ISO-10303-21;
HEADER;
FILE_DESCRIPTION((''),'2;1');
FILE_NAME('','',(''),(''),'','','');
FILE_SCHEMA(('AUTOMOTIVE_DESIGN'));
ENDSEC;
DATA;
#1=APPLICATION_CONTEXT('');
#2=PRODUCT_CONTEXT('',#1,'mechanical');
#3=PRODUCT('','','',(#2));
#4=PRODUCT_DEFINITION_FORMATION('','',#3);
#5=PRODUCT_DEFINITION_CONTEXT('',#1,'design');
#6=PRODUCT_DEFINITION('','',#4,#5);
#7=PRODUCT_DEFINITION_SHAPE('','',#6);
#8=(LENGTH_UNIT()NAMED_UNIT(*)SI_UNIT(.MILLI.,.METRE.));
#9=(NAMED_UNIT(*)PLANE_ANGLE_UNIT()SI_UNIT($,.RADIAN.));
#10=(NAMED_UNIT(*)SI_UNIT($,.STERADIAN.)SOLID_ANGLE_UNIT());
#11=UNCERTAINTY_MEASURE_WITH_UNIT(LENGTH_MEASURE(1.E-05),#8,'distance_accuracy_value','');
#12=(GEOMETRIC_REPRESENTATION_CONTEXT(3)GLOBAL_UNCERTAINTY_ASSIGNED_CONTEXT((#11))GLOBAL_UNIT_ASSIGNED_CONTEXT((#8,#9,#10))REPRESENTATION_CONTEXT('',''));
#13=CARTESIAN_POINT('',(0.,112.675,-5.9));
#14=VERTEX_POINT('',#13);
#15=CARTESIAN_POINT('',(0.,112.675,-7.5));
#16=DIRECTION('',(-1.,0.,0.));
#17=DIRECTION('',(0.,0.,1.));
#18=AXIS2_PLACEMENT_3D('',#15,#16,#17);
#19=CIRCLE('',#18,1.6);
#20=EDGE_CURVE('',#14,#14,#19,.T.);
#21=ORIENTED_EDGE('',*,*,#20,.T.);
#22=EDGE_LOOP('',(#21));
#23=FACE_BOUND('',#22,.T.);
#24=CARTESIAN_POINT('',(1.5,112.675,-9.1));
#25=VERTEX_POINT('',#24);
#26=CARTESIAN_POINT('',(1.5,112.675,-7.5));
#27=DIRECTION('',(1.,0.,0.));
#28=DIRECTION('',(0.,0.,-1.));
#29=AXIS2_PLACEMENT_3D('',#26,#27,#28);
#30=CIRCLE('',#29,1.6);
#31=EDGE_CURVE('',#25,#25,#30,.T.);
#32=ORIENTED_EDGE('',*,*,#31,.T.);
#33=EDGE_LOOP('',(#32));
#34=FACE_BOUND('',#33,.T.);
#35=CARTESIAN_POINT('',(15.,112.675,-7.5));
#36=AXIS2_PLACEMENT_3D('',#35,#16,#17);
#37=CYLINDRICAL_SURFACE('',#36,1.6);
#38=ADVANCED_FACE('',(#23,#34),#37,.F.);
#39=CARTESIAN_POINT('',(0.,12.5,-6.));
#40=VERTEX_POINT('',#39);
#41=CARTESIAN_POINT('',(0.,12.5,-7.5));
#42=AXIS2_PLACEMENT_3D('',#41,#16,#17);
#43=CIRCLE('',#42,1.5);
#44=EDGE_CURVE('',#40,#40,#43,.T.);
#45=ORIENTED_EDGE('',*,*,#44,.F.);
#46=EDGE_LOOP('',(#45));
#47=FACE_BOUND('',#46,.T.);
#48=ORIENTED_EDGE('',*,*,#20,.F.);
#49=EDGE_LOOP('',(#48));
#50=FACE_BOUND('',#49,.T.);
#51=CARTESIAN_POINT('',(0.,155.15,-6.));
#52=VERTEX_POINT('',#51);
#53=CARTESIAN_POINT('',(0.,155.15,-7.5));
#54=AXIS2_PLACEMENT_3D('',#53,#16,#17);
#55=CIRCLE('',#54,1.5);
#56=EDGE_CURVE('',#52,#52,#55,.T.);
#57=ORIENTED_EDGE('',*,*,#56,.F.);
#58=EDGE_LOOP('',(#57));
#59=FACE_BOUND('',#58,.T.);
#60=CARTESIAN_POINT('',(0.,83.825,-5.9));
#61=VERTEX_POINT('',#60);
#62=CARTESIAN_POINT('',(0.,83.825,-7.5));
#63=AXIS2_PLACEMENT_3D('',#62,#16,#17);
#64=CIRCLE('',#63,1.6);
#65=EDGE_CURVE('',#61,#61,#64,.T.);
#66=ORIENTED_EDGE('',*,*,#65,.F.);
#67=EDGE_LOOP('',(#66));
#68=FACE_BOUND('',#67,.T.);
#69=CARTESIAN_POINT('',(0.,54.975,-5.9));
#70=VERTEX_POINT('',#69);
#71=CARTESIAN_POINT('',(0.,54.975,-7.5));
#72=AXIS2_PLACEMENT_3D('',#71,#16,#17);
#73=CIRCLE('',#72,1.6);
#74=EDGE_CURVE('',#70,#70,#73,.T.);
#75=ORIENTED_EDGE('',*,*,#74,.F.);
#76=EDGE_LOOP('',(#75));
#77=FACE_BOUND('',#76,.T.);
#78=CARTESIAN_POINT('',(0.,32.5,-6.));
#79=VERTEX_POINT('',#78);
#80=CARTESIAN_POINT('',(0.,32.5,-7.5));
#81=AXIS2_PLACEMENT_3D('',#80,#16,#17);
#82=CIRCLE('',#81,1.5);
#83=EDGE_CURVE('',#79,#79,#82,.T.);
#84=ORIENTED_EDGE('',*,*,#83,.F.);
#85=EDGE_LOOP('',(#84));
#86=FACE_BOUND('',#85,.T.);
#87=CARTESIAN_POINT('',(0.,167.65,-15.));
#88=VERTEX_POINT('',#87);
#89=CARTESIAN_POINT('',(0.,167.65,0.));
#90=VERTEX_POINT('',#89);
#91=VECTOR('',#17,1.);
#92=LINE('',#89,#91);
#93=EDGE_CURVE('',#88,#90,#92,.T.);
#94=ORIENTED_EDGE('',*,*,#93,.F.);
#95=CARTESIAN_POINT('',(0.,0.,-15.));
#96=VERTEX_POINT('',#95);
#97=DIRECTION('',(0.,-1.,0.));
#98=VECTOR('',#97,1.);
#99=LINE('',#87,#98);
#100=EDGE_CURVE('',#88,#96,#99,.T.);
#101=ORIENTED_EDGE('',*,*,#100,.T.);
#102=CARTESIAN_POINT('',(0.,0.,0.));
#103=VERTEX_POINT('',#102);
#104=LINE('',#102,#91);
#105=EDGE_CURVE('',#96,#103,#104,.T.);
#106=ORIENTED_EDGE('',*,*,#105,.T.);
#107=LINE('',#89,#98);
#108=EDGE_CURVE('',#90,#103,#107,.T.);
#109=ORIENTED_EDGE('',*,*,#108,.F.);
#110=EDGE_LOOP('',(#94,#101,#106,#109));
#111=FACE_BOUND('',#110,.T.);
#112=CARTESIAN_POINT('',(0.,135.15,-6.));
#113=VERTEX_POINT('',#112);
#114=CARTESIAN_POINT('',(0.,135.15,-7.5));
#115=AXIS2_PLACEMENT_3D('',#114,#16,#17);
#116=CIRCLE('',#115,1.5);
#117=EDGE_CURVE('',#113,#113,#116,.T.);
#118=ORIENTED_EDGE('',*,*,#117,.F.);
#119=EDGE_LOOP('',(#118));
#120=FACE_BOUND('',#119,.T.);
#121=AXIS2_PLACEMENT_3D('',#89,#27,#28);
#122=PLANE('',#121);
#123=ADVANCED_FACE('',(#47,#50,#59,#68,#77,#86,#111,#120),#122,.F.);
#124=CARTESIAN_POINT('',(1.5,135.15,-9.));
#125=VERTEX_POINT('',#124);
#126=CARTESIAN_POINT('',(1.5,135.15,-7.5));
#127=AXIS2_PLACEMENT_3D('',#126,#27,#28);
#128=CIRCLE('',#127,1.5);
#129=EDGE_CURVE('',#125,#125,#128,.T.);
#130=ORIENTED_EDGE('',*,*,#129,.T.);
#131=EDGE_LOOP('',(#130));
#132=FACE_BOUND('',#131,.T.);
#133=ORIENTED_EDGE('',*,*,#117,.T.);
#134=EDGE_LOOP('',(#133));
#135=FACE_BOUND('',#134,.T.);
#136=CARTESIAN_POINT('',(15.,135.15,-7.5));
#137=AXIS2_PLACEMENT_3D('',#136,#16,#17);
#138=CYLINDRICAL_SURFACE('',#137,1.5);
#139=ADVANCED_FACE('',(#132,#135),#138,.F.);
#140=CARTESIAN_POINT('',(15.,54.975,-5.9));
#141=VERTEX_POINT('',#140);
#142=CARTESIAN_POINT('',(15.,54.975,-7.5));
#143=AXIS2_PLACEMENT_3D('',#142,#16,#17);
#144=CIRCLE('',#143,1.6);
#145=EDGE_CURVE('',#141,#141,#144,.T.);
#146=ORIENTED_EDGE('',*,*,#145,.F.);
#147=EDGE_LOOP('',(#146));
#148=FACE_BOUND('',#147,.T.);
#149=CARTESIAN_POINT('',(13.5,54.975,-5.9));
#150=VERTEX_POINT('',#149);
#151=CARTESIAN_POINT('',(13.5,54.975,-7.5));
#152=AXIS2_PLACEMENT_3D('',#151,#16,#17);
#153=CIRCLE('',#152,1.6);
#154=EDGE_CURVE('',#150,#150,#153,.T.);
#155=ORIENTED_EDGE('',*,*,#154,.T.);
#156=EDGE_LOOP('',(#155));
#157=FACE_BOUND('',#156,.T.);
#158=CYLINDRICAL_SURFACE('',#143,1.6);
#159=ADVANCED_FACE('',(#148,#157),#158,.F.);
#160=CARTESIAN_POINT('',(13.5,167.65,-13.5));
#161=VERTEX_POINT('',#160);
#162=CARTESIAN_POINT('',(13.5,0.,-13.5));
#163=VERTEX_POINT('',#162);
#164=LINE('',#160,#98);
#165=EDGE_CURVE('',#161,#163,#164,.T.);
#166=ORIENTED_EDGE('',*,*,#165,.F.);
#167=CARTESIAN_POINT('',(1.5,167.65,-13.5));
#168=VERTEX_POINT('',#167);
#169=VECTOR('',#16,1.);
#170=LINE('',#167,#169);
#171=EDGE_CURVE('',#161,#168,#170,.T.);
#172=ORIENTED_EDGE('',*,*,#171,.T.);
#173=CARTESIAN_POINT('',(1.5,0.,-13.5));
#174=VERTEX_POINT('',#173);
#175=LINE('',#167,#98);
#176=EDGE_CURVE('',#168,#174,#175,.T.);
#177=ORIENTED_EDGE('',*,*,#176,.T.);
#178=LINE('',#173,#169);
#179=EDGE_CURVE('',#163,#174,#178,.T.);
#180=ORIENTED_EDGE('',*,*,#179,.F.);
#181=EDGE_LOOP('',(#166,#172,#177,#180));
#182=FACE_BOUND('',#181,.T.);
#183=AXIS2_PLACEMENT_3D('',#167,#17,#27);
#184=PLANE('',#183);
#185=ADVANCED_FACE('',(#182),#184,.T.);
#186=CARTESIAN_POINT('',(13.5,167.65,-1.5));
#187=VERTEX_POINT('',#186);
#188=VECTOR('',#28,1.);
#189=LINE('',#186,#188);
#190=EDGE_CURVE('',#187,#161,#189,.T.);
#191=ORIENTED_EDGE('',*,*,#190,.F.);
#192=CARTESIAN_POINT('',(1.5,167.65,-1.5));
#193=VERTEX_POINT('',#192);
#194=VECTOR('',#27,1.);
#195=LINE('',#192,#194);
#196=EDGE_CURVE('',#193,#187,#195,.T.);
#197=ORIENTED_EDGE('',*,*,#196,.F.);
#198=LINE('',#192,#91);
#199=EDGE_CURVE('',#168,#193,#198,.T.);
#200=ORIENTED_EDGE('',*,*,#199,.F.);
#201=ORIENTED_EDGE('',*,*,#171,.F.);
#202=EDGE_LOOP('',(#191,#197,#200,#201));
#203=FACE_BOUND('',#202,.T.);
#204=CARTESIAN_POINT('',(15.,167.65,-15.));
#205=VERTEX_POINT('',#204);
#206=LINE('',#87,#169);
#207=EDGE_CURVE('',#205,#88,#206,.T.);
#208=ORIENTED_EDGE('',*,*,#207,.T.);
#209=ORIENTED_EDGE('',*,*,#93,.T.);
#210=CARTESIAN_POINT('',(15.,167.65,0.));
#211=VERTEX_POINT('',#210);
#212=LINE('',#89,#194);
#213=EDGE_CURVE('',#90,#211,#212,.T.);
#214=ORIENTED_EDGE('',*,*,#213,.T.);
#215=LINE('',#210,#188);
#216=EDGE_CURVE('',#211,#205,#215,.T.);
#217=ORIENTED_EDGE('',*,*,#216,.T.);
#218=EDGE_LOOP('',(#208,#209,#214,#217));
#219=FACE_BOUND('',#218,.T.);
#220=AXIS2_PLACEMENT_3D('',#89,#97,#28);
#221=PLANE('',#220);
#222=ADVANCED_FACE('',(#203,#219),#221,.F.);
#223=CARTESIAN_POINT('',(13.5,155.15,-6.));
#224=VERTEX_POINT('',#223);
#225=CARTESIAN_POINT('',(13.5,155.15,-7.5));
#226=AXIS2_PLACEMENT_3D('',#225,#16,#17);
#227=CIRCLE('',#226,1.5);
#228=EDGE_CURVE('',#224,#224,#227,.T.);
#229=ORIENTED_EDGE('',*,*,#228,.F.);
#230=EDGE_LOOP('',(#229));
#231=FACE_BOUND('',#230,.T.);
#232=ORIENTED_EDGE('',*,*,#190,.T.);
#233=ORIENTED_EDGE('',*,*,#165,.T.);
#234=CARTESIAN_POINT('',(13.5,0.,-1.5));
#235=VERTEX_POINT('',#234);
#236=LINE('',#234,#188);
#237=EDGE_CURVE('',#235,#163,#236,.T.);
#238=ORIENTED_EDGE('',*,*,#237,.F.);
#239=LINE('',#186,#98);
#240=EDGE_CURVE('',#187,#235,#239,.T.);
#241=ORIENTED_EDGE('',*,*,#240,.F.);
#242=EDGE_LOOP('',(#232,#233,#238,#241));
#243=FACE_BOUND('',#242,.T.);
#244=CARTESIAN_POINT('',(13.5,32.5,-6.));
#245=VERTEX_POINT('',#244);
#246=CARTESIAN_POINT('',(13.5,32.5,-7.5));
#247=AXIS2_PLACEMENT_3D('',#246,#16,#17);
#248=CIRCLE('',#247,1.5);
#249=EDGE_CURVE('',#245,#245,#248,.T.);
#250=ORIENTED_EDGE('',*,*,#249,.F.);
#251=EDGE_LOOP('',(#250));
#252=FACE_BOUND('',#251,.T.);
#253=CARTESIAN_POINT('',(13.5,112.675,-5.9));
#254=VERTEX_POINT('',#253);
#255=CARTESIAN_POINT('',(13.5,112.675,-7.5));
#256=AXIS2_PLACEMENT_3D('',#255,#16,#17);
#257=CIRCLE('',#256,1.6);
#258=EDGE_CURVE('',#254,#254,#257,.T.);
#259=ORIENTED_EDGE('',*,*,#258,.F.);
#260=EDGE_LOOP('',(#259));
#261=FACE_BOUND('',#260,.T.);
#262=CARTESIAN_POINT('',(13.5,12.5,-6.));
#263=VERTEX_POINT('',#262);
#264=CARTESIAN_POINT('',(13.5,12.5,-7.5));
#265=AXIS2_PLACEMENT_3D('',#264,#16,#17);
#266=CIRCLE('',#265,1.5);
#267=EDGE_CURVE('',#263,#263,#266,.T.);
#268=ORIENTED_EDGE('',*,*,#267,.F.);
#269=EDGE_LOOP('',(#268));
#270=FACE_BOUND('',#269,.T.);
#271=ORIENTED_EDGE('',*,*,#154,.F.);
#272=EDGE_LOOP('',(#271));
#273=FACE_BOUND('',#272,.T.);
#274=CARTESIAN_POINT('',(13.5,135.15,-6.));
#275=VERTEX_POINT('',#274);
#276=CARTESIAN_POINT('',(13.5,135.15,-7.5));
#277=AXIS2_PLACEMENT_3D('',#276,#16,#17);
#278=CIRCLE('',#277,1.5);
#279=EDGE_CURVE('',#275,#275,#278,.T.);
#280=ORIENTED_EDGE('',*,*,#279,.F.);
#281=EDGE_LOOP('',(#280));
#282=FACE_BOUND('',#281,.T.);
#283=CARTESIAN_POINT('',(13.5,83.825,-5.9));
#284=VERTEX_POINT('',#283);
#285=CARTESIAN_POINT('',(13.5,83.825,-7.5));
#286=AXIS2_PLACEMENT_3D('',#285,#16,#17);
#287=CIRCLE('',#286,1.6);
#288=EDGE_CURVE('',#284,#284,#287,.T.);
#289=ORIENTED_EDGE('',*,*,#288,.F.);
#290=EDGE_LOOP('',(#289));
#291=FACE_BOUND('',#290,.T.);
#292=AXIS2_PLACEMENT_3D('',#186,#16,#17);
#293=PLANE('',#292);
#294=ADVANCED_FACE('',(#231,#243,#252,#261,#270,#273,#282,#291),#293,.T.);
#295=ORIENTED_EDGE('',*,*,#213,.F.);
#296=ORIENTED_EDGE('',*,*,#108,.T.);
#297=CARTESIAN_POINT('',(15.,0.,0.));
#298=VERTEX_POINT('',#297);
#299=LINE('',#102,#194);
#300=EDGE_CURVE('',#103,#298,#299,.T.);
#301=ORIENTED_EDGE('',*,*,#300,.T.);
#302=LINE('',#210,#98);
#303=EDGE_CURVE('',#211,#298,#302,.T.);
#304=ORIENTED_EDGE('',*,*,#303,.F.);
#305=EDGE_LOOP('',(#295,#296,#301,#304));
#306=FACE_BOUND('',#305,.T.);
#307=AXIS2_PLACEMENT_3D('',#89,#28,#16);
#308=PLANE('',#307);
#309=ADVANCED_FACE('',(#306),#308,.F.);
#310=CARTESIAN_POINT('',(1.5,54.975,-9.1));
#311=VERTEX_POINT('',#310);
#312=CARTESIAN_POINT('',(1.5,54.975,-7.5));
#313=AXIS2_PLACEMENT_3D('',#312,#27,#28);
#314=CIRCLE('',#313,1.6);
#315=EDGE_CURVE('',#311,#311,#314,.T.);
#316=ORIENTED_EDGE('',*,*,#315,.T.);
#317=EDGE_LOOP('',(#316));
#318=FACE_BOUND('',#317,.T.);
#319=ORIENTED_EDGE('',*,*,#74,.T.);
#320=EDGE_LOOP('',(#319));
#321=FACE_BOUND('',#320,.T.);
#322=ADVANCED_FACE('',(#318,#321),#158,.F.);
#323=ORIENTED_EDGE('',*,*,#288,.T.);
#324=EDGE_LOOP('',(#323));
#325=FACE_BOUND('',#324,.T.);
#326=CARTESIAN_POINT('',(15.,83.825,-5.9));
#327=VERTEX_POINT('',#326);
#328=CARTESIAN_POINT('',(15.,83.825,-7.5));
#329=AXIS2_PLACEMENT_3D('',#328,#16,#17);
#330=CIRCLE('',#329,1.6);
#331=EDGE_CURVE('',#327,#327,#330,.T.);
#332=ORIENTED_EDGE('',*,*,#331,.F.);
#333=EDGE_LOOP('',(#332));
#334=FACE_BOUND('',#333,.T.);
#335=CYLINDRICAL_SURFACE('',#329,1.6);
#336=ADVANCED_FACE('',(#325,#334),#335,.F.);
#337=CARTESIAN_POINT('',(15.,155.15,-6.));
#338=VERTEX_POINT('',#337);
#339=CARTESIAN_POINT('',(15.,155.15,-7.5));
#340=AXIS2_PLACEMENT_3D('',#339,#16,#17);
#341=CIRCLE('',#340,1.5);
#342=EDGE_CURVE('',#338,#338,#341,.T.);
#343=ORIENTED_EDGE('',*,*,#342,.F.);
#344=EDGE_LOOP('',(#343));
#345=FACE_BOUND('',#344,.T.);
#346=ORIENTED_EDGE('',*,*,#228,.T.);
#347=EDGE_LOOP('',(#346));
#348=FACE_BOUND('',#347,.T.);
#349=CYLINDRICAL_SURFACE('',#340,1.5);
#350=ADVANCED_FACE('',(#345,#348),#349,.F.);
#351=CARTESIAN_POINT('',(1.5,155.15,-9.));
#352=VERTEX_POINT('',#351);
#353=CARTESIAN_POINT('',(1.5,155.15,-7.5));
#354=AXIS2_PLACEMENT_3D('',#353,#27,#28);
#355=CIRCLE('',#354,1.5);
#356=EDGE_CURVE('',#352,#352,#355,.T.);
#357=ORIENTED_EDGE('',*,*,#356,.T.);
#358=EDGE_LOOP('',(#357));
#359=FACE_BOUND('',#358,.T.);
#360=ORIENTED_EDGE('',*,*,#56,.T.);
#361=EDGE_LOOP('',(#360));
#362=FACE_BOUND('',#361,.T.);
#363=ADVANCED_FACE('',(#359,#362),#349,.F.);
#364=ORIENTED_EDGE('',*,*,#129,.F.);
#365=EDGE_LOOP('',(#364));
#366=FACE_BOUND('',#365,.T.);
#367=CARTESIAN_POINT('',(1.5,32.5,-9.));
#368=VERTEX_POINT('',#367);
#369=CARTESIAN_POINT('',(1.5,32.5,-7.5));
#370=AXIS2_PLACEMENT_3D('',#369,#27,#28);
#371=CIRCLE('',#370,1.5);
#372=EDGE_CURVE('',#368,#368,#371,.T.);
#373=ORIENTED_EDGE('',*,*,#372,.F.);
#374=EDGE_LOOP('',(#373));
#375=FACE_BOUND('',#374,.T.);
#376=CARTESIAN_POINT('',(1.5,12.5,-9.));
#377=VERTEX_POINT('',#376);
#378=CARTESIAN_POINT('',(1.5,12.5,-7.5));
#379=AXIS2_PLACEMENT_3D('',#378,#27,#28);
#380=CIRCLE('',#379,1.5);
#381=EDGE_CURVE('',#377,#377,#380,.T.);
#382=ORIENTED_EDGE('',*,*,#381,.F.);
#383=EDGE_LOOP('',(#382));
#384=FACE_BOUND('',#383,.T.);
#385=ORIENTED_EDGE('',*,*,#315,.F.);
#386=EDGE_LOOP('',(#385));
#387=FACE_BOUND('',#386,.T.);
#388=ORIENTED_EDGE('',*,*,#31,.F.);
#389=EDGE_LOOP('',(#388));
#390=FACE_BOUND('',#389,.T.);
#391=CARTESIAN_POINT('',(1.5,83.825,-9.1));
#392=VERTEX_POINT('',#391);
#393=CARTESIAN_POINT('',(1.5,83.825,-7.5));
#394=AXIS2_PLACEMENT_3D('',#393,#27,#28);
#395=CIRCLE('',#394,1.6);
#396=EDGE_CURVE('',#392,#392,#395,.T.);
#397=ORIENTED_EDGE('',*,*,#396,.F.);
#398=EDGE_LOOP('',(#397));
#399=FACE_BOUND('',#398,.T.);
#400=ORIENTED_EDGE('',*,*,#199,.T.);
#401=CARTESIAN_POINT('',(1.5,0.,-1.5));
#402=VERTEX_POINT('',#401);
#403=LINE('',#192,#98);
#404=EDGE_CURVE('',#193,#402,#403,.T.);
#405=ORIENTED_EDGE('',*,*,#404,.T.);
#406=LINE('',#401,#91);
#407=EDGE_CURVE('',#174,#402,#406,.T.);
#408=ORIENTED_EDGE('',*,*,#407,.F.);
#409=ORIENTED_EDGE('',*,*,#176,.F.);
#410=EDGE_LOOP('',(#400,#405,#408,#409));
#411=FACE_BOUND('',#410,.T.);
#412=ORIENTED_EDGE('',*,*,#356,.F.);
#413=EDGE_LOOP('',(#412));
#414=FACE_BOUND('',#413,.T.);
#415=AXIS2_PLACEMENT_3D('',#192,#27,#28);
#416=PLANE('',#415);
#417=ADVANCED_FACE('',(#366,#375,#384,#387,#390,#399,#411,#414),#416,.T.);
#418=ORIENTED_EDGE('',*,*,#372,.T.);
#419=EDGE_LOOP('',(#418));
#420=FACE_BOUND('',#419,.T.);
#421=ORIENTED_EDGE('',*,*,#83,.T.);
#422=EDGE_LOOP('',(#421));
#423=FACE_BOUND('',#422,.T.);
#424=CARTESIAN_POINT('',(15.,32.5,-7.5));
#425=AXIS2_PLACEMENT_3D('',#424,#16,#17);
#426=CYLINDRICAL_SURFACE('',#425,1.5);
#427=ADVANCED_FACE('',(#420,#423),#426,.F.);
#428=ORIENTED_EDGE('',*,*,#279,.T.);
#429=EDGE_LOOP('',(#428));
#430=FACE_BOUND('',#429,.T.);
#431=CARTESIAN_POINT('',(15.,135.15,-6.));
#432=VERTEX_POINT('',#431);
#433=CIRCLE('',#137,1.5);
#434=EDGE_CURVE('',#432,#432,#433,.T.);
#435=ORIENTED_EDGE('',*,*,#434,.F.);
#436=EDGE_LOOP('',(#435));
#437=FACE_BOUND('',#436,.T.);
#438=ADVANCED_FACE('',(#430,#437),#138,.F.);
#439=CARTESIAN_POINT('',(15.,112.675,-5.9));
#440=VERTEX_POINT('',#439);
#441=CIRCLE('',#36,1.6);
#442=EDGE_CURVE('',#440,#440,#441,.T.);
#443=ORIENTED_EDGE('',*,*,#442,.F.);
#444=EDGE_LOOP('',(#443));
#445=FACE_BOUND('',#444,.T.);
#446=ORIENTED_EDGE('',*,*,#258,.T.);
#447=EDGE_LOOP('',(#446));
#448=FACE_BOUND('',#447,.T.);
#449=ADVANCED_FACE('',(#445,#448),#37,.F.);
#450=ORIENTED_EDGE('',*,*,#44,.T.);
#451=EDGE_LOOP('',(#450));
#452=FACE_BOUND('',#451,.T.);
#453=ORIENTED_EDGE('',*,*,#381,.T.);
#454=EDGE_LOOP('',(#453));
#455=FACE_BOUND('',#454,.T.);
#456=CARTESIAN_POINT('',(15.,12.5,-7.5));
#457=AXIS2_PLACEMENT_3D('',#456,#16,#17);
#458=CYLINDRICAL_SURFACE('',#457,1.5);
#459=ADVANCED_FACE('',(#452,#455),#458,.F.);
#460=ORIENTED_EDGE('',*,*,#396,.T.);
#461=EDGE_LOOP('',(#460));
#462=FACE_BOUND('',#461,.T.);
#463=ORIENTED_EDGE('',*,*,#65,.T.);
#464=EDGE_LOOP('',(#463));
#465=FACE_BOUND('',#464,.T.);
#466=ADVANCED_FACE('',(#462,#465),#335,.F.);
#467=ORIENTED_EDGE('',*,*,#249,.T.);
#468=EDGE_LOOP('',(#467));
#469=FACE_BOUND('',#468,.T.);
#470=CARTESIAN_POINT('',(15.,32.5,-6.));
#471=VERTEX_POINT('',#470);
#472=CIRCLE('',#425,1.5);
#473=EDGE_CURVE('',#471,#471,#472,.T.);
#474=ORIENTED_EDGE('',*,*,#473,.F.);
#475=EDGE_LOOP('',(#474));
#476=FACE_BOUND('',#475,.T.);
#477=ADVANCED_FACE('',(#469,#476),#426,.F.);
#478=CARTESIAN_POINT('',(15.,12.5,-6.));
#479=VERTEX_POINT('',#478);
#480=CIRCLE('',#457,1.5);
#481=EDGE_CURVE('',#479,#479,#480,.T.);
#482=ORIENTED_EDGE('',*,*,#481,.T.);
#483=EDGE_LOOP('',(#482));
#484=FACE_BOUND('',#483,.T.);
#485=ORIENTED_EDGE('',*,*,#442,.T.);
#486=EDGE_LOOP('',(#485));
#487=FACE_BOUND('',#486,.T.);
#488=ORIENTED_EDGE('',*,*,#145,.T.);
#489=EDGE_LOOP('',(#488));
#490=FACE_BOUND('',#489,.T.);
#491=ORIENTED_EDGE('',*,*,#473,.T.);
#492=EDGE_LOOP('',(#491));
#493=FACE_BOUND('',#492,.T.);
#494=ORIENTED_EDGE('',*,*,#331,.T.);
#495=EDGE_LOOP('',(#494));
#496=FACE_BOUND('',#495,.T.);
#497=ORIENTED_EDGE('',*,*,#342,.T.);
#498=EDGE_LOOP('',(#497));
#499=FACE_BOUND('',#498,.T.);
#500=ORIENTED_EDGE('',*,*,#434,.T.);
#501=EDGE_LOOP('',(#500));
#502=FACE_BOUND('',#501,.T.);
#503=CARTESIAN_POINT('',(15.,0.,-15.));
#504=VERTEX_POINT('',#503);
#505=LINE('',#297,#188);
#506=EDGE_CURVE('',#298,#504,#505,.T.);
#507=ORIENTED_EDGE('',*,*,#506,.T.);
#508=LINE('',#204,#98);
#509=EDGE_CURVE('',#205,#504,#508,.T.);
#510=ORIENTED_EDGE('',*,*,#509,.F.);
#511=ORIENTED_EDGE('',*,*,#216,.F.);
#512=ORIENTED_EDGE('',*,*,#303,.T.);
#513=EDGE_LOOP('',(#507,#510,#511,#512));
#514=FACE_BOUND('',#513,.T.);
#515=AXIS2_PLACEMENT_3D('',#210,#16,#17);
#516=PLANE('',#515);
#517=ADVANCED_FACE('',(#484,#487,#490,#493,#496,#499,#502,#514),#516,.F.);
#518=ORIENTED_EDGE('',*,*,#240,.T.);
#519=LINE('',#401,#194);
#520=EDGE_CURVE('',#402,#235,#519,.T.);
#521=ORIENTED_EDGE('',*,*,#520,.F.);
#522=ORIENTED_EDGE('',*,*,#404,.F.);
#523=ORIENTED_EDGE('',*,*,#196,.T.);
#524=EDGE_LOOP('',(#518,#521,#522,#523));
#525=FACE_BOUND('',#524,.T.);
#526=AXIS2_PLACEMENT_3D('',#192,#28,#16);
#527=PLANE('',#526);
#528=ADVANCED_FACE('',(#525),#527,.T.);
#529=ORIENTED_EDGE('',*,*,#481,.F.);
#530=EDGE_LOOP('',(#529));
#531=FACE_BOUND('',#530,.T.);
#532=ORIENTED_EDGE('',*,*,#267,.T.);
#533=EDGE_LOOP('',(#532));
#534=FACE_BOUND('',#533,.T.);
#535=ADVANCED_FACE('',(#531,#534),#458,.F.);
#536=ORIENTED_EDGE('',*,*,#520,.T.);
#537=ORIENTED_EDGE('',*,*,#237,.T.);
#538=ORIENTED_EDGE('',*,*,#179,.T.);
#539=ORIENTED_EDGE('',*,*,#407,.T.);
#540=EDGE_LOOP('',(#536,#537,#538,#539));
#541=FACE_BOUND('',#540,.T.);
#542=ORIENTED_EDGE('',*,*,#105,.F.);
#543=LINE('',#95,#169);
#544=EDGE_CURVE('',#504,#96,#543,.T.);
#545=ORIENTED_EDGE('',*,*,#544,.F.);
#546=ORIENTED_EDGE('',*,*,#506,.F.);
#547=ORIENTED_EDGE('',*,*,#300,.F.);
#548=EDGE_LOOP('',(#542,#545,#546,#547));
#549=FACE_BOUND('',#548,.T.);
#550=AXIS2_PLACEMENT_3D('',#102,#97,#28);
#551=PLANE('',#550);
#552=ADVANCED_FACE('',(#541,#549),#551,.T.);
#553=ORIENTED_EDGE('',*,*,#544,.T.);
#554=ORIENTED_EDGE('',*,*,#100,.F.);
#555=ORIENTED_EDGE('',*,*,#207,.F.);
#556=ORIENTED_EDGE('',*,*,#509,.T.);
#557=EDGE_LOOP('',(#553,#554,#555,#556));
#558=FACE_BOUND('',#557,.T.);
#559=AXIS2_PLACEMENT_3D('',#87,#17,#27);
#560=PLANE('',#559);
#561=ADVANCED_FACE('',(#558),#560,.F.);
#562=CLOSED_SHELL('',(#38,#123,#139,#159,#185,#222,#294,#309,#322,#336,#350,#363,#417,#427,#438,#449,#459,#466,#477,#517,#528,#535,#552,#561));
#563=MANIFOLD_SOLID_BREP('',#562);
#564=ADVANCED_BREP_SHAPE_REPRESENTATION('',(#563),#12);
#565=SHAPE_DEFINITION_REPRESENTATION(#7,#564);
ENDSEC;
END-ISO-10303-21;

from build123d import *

# Parameters (mm, degrees)
SKETCH_1_W                = 15
SKETCH_1_H                = 15
SKETCH_1_W_2              = 12
SKETCH_1_H_2              = 12
EXTRUDE_1_DEPTH           = 167.65
CUT_EXTRUDE_1_OUTLINE_R   = 1.5
CUT_EXTRUDE_1_OUTLINE_R_2 = 1.6
CUT_EXTRUDE_1_DEPTH       = 15


# Read off the part's stored shape, not the designer's step: 切除-拉伸1
with BuildPart() as part:
    # 草图1 → 凸台-拉伸1 (new body)
    with BuildSketch(Plane(origin=(0, 0, 0), x_dir=(1, 0, 0), z_dir=(0, 1, 0))):
        with Locations((7.5, 7.5)):
            Rectangle(SKETCH_1_W, SKETCH_1_H)
        with Locations((7.5, 7.5)):
            Rectangle(SKETCH_1_W_2, SKETCH_1_H_2, mode=Mode.SUBTRACT)
    extrude(amount=EXTRUDE_1_DEPTH)

    # 切除-拉伸1 outline → 切除-拉伸1 (cut)
    with BuildSketch(Plane.YZ):
        with Locations((12.5, -7.5)):
            Circle(CUT_EXTRUDE_1_OUTLINE_R)
        with Locations((32.5, -7.5)):
            Circle(CUT_EXTRUDE_1_OUTLINE_R)
        with Locations((54.975, -7.5)):
            Circle(CUT_EXTRUDE_1_OUTLINE_R_2)
        with Locations((83.825, -7.5)):
            Circle(CUT_EXTRUDE_1_OUTLINE_R_2)
        with Locations((112.675, -7.5)):
            Circle(CUT_EXTRUDE_1_OUTLINE_R_2)
        with Locations((135.15, -7.5)):
            Circle(CUT_EXTRUDE_1_OUTLINE_R)
        with Locations((155.15, -7.5)):
            Circle(CUT_EXTRUDE_1_OUTLINE_R)
    extrude(amount=CUT_EXTRUDE_1_DEPTH, mode=Mode.SUBTRACT)


solid = part.part
